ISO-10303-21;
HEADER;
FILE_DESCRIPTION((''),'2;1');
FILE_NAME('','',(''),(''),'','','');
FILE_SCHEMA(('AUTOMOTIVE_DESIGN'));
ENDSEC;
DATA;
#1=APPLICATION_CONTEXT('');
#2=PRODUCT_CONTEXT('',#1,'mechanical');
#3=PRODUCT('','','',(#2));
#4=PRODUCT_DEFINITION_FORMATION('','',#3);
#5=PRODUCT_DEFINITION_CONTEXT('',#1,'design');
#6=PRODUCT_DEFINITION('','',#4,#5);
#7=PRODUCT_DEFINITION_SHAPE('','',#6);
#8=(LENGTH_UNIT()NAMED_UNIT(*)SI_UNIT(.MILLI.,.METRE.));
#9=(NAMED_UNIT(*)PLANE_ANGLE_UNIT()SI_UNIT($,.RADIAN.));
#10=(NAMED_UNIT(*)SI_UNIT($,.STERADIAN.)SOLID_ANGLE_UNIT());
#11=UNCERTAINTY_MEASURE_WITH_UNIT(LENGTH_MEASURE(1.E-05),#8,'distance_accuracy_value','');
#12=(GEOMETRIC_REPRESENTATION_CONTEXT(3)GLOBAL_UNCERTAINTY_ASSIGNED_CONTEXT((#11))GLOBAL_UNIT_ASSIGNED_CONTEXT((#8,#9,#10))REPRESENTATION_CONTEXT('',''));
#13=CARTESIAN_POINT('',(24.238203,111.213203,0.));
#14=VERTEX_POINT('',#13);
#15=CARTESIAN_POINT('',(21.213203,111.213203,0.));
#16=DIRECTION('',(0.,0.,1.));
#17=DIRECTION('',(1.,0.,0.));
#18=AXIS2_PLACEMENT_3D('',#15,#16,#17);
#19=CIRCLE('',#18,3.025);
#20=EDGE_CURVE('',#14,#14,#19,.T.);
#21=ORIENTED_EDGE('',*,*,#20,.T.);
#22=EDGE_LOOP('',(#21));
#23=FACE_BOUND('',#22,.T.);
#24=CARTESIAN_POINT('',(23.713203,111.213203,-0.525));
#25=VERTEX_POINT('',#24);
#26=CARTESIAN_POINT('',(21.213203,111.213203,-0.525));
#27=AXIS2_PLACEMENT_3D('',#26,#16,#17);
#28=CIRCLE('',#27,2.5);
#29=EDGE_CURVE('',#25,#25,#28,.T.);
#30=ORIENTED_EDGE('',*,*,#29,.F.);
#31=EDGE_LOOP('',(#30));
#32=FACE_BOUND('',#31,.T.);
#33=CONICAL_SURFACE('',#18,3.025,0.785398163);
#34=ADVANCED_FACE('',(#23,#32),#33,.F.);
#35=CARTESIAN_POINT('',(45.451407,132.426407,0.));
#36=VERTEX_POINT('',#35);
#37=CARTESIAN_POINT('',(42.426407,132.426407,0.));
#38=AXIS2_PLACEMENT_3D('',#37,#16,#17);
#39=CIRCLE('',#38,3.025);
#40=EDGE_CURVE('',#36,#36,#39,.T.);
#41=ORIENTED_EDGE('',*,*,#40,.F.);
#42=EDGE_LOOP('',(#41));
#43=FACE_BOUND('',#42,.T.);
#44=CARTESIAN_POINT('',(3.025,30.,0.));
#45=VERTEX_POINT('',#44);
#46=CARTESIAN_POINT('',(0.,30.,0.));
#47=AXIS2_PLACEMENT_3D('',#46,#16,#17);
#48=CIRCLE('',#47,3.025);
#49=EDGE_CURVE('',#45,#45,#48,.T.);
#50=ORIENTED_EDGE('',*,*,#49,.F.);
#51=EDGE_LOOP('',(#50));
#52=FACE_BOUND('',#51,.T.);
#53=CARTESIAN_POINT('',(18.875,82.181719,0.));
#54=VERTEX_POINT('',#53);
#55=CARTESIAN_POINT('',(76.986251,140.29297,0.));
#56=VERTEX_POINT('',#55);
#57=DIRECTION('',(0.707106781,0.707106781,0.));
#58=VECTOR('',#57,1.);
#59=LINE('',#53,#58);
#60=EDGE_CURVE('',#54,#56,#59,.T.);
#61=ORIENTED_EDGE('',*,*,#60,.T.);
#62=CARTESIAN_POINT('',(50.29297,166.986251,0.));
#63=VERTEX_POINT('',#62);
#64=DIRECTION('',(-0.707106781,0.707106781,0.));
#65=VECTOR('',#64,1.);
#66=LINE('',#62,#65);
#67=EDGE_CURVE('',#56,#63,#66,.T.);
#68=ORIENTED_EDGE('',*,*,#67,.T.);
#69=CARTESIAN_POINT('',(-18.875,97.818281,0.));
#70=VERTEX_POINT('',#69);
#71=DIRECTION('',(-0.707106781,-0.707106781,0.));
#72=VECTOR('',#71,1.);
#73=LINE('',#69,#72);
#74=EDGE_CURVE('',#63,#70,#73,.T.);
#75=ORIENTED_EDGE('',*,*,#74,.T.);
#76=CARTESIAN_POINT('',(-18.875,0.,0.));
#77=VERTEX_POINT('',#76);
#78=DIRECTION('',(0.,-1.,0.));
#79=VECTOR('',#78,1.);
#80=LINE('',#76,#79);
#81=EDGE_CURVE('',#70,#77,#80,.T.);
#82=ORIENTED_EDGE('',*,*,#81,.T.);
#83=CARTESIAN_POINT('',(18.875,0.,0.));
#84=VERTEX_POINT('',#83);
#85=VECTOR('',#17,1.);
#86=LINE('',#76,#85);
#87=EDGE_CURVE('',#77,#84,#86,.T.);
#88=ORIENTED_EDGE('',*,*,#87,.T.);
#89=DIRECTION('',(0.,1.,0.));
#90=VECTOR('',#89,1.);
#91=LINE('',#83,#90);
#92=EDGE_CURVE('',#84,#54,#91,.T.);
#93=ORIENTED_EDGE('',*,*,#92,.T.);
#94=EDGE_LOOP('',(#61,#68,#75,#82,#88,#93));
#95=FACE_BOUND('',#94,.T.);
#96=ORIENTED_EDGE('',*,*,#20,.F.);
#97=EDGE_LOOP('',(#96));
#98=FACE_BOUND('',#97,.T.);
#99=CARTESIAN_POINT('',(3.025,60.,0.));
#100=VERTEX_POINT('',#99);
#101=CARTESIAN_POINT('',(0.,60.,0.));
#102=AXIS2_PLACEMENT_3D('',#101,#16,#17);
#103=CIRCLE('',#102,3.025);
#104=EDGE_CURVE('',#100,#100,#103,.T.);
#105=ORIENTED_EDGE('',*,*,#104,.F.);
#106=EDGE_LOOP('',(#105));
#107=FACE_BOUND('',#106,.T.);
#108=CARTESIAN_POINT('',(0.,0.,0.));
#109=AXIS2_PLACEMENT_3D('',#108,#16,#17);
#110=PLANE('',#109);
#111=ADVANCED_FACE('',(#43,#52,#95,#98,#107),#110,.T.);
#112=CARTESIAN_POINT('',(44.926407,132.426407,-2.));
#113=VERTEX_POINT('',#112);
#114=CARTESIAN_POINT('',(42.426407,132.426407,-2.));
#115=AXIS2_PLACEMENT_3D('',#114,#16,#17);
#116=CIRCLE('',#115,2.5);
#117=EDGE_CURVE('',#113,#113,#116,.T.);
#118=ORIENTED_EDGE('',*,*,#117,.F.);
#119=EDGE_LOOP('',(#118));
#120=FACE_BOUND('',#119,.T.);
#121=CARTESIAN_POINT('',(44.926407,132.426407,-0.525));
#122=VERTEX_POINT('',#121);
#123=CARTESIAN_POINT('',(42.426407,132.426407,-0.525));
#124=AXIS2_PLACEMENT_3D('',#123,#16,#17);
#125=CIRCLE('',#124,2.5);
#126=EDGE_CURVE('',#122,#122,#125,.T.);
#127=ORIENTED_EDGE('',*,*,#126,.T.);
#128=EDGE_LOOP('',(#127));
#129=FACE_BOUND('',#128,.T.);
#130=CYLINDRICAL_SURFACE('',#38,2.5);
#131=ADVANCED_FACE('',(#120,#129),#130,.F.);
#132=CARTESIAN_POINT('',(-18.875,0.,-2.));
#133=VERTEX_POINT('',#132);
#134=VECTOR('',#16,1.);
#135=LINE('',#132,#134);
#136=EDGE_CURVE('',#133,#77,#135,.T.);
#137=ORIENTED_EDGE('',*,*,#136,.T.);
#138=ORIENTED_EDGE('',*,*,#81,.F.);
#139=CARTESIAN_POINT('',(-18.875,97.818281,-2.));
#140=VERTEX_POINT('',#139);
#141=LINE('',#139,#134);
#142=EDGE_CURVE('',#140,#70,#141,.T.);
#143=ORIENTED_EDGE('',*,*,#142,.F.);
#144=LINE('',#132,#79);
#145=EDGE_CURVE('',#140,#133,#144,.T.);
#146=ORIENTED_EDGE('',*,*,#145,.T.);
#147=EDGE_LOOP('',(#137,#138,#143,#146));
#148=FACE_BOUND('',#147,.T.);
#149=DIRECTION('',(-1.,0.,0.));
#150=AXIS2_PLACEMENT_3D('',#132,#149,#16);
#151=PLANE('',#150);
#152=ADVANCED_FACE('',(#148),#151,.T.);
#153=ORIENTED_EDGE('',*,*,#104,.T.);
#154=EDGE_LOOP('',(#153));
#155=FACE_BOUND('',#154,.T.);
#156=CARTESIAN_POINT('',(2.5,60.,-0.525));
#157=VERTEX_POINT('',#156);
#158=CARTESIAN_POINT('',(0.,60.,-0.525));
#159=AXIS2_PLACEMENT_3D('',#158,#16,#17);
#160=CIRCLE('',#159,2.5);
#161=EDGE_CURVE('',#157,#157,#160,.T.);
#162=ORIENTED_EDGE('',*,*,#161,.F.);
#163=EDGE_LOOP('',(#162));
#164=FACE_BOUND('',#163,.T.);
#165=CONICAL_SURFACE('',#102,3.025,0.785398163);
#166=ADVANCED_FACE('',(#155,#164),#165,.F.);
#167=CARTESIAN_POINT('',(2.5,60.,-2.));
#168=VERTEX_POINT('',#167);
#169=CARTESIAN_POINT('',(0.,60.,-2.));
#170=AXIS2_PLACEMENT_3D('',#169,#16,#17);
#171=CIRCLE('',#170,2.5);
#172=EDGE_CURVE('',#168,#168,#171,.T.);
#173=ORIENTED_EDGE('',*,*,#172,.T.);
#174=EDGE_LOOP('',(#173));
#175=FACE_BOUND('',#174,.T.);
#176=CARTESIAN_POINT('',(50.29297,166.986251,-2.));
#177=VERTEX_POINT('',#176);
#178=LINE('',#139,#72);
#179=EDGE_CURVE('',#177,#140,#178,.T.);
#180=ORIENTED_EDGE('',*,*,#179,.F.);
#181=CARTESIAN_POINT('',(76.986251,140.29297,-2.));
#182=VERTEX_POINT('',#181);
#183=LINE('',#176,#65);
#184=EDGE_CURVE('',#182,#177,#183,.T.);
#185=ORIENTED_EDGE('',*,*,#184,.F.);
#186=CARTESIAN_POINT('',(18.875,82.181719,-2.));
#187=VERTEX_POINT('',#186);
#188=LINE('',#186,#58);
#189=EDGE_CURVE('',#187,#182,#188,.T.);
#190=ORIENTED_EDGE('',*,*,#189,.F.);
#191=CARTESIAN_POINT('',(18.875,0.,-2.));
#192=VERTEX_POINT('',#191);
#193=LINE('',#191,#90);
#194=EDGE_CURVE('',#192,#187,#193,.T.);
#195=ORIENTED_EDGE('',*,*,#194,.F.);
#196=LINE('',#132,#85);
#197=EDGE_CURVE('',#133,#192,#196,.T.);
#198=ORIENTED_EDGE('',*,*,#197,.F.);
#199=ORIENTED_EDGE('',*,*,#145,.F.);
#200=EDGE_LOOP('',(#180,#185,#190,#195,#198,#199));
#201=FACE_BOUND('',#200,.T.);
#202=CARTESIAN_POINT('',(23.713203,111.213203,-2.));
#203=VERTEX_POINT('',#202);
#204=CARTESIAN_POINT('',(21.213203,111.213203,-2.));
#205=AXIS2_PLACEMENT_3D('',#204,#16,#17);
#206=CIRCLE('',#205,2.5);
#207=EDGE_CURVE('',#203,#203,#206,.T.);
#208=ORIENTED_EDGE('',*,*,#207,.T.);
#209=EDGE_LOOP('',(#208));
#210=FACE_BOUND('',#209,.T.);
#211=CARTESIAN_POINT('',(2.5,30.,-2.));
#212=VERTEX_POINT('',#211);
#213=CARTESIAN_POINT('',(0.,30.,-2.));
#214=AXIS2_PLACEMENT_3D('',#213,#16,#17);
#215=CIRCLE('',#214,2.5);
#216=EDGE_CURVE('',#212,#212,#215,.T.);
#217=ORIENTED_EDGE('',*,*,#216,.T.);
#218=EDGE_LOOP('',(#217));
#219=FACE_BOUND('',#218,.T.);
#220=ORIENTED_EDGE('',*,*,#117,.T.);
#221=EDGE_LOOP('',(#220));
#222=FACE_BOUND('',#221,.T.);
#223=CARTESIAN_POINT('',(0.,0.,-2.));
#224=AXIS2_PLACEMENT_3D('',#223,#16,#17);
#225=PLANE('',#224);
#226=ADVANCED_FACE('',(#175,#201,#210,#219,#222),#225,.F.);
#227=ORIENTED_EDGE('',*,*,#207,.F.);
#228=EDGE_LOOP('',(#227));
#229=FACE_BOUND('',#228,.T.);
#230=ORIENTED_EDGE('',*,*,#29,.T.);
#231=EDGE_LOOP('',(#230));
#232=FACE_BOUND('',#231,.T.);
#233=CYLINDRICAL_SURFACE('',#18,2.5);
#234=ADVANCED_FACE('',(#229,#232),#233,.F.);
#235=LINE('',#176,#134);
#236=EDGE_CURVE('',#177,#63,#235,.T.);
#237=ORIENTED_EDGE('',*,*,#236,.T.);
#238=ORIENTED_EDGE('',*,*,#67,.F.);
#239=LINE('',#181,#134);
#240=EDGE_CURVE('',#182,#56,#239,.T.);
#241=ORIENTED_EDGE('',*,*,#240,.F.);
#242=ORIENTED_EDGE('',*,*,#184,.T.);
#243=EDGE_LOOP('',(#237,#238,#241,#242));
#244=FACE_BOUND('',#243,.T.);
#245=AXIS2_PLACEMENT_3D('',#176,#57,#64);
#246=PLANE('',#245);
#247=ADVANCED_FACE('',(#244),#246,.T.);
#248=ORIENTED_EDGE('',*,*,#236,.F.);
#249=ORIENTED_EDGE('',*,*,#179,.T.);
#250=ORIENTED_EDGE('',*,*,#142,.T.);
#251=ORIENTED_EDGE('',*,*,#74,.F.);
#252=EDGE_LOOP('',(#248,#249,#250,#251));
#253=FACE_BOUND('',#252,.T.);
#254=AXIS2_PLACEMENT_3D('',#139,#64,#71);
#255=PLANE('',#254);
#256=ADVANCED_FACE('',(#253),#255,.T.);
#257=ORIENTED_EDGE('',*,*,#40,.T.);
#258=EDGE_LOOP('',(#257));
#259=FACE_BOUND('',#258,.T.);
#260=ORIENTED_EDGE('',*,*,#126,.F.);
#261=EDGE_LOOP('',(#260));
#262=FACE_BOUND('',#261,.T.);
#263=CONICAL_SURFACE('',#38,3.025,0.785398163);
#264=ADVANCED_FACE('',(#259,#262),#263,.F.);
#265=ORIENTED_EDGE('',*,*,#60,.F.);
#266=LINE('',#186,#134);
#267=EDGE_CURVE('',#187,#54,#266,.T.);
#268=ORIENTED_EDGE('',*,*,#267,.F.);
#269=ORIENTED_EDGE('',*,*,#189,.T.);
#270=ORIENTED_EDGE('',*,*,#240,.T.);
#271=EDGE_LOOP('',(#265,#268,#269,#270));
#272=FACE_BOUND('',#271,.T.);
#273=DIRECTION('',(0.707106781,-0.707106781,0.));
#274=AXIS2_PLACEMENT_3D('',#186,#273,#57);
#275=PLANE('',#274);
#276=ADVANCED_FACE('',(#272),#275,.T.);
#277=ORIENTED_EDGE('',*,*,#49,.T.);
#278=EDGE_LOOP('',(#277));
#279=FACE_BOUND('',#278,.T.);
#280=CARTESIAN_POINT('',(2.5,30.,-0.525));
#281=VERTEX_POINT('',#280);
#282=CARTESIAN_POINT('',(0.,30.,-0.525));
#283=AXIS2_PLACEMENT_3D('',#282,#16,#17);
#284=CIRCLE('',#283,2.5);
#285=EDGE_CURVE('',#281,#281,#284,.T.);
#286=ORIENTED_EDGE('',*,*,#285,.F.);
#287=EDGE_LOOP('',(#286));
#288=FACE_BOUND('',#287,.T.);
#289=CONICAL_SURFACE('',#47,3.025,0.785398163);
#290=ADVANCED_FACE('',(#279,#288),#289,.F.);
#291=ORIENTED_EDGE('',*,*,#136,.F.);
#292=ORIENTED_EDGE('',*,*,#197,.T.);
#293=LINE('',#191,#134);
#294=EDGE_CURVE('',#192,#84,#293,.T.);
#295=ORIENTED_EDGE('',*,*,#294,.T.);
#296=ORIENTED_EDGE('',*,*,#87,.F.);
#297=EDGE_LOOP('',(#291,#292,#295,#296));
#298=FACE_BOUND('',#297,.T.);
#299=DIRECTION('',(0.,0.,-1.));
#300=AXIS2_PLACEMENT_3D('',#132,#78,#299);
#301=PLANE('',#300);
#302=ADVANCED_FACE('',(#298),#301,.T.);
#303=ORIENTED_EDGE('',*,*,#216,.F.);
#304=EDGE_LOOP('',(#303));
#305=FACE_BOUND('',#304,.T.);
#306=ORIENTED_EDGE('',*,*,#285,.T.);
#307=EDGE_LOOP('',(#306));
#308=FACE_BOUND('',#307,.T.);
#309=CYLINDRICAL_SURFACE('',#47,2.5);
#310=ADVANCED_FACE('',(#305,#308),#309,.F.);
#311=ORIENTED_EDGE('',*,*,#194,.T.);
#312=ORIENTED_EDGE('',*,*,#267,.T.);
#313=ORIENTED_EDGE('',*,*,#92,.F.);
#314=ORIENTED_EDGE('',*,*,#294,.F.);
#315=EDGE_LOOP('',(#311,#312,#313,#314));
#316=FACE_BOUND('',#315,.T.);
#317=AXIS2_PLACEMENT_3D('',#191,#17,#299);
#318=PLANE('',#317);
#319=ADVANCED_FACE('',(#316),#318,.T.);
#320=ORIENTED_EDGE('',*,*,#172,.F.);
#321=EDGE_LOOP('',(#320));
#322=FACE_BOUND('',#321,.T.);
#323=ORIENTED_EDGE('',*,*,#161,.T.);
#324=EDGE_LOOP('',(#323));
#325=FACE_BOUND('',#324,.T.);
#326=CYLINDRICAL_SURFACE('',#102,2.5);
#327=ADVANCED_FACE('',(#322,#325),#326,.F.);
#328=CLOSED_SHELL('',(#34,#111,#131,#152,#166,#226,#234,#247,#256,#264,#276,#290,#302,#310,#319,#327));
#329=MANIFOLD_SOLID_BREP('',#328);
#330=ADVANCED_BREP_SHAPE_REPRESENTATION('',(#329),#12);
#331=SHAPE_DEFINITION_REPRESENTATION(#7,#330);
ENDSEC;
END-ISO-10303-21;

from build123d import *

# Parameters (mm, degrees)
BASE_FLANGE2_DEPTH              = 2
M6X1_0_TAPPED_HOLE1_D           = 5
M6X1_0_TAPPED_HOLE1_DEPTH       = 15
M6X1_0_TAPPED_HOLE1_CSINK_D     = 6.05
M6X1_0_TAPPED_HOLE1_CSINK_ANGLE = 90
M6X1_0_TAPPED_HOLE1_TIP         = 1.502151548


# Sheet-metal steps are written as plain solids
with BuildPart() as part:
    # Sketch1 → Base-Flange2 (new body)
    with BuildSketch(Plane.XY):
        Polygon((18.875, 0), (18.875, 82.18171901), (76.986250802, 140.292969812), (50.292969812, 166.986250802), (-18.875, 97.81828099), (-18.875, 0), align=None)
    extrude(amount=-BASE_FLANGE2_DEPTH)

    # M6x1.0 Tapped Hole1
    with Locations(Plane.XY):
        with Locations((42.426406871, 132.426406871), (21.213203436, 111.213203436), (0, 60), (0, 30)):
            CounterSinkHole(M6X1_0_TAPPED_HOLE1_D / 2, M6X1_0_TAPPED_HOLE1_CSINK_D / 2, depth=M6X1_0_TAPPED_HOLE1_DEPTH, counter_sink_angle=M6X1_0_TAPPED_HOLE1_CSINK_ANGLE)
            with Locations((0, 0, -(M6X1_0_TAPPED_HOLE1_DEPTH + M6X1_0_TAPPED_HOLE1_TIP / 2))):  # 118° drill point
                Cone(0, M6X1_0_TAPPED_HOLE1_D / 2, M6X1_0_TAPPED_HOLE1_TIP, mode=Mode.SUBTRACT)


solid = part.part
